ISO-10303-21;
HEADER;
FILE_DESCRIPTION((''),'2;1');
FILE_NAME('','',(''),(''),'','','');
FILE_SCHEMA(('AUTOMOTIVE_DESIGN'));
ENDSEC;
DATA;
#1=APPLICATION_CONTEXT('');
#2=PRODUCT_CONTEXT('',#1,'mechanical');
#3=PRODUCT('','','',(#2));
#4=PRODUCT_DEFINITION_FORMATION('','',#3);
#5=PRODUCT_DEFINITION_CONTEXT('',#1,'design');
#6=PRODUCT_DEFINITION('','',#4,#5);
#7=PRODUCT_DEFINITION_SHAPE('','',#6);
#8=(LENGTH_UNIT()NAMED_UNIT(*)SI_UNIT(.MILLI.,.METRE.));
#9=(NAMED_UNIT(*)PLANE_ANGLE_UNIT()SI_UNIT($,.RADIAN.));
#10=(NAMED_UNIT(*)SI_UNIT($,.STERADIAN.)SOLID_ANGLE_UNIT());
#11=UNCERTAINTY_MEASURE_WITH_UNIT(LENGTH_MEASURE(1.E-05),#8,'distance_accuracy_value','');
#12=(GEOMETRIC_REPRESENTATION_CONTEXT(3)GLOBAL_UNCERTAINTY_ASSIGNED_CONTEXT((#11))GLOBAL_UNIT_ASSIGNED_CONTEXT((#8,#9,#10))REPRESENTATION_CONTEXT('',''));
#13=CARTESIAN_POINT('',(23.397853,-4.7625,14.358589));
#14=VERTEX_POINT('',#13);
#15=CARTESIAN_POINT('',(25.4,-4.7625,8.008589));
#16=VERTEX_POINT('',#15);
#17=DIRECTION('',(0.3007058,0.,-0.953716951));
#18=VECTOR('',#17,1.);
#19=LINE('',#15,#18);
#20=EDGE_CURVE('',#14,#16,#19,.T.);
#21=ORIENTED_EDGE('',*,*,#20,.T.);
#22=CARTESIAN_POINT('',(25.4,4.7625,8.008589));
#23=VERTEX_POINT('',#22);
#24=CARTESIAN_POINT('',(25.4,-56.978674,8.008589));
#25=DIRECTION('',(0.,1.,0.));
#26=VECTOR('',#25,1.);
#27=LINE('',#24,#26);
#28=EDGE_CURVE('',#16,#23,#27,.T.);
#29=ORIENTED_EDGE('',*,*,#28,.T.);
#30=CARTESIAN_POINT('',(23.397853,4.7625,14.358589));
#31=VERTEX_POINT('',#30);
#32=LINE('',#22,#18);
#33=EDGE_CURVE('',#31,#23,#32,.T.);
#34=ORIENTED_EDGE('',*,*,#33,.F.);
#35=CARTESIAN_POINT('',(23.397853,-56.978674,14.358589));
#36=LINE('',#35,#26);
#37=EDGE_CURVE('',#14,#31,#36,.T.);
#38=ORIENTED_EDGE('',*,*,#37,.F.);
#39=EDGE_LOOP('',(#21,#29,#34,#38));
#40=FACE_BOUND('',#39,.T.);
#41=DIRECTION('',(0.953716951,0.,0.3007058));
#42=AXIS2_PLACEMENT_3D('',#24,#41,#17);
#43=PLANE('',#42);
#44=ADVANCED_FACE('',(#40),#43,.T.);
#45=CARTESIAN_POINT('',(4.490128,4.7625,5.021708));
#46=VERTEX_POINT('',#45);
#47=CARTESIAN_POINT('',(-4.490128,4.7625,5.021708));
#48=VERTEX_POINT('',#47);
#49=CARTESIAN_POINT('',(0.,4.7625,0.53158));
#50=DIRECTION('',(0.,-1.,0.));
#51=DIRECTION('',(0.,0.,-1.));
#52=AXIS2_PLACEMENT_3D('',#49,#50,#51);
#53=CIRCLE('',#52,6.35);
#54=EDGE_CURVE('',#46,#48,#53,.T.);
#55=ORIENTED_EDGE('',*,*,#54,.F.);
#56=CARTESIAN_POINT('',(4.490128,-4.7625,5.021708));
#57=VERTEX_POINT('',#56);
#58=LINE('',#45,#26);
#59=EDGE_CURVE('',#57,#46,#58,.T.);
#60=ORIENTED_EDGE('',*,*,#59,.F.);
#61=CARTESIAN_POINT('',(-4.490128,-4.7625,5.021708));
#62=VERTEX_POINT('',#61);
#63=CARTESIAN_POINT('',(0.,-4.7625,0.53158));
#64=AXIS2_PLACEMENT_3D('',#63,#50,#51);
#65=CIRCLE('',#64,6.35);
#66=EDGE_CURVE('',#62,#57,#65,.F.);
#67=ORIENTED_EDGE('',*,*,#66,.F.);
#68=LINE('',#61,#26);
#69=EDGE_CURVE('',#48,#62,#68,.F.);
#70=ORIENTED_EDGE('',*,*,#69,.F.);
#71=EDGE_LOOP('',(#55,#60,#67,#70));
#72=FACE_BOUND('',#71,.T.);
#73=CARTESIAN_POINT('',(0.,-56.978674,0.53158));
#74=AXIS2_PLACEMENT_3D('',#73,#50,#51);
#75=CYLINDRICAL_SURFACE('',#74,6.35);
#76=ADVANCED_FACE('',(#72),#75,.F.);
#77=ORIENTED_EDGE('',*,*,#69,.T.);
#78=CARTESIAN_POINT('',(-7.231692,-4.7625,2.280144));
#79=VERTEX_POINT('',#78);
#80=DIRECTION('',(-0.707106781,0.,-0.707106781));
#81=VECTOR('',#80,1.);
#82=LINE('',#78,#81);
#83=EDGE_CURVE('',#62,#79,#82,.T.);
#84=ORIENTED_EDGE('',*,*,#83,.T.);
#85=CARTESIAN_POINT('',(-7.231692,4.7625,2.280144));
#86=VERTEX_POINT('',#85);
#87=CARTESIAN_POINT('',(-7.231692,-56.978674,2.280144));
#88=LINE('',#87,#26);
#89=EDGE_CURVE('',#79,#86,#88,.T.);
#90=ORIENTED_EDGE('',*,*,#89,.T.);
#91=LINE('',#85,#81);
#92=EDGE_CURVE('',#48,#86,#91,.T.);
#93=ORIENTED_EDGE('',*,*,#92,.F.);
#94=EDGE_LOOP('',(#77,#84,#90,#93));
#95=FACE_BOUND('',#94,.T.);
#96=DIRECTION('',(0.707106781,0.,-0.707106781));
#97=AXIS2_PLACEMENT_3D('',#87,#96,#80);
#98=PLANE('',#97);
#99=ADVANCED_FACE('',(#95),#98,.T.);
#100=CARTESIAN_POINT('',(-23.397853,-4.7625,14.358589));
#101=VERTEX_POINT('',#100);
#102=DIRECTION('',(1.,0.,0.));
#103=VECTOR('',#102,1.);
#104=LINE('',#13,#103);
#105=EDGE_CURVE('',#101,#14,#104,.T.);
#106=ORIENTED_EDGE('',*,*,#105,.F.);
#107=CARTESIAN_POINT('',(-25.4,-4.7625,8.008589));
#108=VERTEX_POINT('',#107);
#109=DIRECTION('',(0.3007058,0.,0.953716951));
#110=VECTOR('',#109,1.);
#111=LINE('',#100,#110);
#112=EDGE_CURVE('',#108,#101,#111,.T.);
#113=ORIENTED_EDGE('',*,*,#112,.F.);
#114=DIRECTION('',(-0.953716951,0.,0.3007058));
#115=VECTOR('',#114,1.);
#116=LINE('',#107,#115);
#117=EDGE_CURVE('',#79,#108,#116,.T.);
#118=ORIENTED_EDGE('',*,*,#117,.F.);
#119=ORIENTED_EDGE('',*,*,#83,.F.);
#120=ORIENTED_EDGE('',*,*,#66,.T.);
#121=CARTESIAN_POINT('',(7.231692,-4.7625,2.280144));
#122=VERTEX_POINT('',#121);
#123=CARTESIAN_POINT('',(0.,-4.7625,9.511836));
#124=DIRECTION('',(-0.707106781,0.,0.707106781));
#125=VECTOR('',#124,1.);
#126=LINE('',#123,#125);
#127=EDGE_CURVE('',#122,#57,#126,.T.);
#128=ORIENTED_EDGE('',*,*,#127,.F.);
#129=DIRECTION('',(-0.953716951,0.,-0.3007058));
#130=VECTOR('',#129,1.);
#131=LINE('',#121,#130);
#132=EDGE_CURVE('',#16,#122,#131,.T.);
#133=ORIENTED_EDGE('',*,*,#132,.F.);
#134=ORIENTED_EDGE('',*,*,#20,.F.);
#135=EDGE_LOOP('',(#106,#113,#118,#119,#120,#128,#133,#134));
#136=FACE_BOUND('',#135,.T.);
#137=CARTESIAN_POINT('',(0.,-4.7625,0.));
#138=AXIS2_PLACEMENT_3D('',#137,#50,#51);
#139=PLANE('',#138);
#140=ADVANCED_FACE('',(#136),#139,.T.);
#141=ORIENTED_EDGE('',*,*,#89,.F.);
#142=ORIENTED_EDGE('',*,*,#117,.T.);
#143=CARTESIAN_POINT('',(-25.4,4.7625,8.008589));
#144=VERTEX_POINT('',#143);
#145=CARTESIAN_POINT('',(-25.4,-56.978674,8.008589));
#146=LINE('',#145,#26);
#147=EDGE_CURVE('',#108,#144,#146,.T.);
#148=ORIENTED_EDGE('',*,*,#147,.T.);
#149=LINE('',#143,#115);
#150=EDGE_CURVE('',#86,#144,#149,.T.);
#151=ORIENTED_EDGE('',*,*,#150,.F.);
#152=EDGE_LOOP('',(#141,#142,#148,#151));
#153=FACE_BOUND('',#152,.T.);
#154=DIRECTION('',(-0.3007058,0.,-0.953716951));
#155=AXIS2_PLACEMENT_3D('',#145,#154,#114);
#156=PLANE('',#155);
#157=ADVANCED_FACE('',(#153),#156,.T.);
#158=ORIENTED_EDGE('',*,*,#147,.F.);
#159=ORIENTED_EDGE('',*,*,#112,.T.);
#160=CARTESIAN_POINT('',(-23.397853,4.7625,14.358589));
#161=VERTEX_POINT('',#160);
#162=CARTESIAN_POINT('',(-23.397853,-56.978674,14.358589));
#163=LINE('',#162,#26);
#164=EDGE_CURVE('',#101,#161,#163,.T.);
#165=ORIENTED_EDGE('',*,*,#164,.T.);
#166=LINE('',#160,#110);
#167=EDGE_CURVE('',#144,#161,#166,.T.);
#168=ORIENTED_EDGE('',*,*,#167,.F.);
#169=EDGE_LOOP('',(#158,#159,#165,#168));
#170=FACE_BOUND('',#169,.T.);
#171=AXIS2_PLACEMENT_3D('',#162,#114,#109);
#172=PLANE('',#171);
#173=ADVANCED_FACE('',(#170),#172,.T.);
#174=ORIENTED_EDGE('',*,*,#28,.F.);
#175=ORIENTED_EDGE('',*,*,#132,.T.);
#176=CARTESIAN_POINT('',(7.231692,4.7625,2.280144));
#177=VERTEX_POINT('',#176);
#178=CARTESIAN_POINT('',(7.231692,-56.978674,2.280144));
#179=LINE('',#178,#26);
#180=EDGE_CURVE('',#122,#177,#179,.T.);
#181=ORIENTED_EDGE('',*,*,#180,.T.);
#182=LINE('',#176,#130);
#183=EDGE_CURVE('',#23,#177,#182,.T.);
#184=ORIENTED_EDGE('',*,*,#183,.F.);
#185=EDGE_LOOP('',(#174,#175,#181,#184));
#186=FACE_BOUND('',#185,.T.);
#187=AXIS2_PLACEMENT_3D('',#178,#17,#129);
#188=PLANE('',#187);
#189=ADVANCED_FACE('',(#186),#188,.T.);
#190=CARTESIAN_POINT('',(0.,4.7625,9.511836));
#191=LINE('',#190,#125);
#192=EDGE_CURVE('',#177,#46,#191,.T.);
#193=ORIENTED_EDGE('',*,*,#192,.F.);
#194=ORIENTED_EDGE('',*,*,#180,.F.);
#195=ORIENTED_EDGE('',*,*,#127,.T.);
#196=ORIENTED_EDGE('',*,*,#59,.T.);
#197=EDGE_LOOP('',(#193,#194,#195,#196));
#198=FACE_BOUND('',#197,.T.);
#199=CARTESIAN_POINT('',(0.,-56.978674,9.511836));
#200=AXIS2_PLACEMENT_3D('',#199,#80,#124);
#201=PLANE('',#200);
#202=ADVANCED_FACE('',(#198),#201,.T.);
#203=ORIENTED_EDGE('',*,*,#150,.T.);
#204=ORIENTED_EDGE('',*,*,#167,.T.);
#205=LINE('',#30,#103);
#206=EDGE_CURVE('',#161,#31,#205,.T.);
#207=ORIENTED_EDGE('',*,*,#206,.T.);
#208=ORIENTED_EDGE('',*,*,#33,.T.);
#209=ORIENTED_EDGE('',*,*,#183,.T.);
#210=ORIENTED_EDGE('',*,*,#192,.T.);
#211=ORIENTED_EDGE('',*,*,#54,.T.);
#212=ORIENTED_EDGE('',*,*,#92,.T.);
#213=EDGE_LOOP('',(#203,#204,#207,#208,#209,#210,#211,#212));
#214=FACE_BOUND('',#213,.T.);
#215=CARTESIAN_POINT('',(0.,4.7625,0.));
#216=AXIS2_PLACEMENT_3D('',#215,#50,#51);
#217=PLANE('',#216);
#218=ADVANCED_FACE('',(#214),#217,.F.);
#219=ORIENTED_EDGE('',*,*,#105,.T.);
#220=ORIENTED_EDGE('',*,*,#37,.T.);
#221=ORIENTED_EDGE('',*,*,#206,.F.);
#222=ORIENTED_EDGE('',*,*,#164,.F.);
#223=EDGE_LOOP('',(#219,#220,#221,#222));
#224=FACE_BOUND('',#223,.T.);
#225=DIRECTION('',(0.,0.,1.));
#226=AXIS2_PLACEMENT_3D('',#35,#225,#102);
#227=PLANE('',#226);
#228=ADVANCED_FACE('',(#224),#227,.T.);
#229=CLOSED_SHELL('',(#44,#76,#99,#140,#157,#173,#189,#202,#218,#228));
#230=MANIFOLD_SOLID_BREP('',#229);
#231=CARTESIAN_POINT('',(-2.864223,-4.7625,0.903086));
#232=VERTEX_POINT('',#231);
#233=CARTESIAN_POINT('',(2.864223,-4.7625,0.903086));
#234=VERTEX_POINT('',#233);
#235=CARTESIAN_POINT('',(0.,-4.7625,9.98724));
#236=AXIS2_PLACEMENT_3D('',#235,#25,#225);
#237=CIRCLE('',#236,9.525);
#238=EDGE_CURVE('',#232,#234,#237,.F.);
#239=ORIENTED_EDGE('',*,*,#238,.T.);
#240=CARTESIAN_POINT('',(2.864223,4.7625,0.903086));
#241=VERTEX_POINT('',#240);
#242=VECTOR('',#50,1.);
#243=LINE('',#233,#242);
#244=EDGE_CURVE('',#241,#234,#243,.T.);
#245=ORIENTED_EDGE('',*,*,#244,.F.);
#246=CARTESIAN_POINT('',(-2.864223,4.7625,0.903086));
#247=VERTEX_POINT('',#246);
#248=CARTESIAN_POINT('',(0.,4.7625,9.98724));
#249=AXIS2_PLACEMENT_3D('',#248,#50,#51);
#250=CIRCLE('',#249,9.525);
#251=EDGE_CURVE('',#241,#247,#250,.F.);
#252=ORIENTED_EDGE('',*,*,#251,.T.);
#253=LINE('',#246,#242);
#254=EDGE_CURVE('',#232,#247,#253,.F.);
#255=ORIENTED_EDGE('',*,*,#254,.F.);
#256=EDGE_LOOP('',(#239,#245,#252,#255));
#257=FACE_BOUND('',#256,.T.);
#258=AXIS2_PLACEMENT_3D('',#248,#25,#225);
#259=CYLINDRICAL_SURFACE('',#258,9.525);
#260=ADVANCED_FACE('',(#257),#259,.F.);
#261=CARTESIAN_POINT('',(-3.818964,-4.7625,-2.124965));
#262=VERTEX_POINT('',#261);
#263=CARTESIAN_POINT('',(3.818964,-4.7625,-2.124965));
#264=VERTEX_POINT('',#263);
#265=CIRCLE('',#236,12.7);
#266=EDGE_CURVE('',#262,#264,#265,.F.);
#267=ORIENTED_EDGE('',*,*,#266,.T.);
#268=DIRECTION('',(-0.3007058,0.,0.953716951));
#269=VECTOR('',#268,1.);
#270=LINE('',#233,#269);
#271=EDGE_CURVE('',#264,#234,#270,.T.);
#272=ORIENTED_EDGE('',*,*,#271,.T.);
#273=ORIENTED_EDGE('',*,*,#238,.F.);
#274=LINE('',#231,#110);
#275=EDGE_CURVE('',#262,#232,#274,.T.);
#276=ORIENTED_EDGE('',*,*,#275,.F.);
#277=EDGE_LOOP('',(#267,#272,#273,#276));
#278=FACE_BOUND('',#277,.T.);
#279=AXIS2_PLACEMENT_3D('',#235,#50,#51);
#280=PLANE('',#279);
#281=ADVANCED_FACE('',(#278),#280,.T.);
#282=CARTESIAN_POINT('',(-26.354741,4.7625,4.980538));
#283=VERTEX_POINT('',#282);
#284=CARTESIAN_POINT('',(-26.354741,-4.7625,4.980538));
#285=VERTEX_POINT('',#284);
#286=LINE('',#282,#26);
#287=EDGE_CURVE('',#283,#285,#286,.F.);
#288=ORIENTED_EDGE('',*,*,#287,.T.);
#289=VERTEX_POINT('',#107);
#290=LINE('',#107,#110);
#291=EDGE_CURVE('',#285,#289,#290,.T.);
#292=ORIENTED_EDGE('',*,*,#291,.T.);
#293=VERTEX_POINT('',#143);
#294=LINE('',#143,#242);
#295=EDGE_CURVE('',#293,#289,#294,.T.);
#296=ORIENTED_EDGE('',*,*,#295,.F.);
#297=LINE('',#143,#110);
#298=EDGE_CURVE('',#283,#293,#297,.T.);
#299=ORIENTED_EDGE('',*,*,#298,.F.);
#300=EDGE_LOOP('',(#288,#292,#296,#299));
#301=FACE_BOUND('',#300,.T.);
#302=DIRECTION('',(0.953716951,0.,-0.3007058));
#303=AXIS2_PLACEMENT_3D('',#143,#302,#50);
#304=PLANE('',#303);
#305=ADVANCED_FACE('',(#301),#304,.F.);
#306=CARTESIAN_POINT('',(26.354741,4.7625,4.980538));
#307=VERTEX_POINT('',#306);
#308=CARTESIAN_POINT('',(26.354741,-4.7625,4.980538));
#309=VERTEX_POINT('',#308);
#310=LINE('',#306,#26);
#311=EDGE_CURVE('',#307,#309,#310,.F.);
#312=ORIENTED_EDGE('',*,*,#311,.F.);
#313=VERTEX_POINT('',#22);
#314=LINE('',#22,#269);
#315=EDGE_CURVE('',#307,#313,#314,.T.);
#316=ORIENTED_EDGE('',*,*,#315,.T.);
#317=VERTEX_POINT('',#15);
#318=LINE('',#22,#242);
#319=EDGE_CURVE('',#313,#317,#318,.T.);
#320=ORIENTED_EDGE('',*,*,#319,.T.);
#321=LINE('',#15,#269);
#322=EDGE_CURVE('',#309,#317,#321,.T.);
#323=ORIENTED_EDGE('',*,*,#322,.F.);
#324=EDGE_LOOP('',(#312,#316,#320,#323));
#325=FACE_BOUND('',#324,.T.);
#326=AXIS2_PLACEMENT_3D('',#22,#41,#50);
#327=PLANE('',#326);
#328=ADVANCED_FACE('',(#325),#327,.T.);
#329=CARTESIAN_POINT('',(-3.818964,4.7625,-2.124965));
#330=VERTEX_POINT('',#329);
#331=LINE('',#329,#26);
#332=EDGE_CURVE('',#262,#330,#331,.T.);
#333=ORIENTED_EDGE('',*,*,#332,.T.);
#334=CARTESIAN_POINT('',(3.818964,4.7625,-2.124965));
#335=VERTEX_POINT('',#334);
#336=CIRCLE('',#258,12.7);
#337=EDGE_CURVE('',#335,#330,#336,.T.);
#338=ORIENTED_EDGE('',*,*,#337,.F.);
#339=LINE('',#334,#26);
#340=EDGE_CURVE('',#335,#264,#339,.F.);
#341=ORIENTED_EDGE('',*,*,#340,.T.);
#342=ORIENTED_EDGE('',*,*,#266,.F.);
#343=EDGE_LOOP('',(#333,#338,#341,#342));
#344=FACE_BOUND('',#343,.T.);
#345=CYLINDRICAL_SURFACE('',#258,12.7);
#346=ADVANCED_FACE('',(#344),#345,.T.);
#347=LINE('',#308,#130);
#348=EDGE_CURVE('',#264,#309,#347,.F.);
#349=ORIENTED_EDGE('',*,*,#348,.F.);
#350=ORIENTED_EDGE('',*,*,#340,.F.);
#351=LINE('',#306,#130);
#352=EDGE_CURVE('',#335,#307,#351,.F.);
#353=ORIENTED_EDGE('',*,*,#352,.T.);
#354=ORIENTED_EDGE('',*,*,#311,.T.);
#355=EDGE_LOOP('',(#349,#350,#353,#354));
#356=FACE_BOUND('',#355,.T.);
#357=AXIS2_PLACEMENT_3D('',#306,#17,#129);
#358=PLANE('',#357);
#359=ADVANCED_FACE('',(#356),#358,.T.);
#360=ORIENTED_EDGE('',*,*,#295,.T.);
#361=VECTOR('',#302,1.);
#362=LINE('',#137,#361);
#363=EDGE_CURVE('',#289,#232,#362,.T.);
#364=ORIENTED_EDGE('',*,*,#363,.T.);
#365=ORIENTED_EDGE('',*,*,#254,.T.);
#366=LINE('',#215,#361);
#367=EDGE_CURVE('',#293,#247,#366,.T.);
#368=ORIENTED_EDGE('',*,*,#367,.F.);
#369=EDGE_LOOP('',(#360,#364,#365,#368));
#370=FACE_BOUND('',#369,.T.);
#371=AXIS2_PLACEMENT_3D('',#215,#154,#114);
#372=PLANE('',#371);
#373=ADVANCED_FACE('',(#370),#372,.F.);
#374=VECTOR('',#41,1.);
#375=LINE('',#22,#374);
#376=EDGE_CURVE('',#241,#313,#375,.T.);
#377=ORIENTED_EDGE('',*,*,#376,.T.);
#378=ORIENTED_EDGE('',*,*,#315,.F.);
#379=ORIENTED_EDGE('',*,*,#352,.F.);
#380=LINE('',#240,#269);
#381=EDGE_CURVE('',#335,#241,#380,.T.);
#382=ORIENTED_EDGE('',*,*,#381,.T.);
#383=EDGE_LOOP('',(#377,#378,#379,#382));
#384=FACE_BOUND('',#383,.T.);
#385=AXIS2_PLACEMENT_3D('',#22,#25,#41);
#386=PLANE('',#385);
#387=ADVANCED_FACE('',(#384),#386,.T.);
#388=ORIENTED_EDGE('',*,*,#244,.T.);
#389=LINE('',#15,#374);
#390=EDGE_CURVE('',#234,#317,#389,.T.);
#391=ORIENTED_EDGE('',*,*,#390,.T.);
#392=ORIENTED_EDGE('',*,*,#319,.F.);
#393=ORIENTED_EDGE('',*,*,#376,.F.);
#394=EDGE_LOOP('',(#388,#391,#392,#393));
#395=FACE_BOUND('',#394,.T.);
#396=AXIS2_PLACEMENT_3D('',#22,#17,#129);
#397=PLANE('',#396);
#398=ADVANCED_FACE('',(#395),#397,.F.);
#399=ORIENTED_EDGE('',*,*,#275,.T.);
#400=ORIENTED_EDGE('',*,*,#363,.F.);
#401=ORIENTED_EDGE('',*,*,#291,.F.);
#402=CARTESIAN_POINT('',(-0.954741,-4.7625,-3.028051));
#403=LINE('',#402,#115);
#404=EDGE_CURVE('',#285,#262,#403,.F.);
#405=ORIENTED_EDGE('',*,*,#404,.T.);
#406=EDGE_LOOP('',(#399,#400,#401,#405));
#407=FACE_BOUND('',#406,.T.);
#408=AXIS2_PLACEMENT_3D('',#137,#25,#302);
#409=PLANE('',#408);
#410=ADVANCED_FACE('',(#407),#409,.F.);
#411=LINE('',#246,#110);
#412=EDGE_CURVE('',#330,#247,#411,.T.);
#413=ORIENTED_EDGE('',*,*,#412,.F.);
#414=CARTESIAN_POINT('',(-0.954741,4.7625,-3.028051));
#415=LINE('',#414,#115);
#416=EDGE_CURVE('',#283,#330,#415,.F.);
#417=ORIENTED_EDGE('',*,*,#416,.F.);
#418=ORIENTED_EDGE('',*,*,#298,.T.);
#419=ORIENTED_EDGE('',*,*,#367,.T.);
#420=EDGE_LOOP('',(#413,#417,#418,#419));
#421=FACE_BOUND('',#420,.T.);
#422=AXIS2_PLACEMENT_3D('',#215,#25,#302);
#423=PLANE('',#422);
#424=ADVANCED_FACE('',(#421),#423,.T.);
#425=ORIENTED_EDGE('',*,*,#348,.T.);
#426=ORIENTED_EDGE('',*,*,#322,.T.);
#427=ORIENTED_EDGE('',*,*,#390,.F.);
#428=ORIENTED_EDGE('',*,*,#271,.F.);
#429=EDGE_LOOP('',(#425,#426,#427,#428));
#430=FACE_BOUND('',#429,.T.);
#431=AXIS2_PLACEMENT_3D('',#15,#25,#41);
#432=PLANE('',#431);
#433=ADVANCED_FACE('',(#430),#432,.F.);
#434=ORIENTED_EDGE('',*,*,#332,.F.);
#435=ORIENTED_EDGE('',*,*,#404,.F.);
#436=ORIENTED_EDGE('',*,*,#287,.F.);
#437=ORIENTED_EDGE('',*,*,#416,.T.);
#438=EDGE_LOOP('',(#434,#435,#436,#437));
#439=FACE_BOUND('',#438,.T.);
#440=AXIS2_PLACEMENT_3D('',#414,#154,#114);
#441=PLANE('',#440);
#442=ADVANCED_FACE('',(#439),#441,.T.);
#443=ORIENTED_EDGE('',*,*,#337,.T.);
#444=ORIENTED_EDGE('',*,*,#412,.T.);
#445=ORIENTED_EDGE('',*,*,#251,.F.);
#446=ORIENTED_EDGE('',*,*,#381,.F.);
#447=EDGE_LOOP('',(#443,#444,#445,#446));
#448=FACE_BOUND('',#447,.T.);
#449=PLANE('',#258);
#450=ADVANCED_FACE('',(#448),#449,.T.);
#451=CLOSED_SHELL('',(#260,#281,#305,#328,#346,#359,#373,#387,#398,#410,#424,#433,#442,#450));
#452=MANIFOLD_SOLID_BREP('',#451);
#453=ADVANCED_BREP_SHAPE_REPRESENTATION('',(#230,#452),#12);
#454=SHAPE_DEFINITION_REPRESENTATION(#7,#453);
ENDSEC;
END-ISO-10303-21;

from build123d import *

# Parameters (mm, degrees)
BOSS_EXTRUDE1_DEPTH    = 4.7625
BOSS_EXTRUDE2_DEPTH    = 9.525
FILLET1_R              = 6.35
CONVERT_SOLID1_START   = -4.7625
CONVERT_SOLID1_DEPTH   = 9.525
CONVERT_SOLID1_2_DEPTH = 9.525


# Read off the part's stored shape, not the designer's step: Convert-Solid1
with BuildPart() as part:
    # Sketch1 → Boss-Extrude1 (new, symmetric)
    with BuildSketch(Plane(origin=(0, 0, 0), x_dir=(1, 0, 0), z_dir=(0, 1, 0))):
        Polygon((0, 3.329079972), (26.354740913, -4.980537919), (25.4, -8.008589238), (0, 0), (-25.4, -8.008589238), (-26.354740913, -4.980537919), align=None)
    extrude(amount=BOSS_EXTRUDE1_DEPTH, both=True)

    # Convert-Solid1 outline → Convert-Solid1 (cut)
    with BuildSketch(Plane(origin=(0, 0, 0), x_dir=(1, 0, 0), z_dir=(0, 1, 0)).offset(CONVERT_SOLID1_START)):
        with BuildLine():
            ThreePointArc((-3.818963654, 2.124965358), (0, 2.712760083), (3.818963654, 2.124965358))
            Line((3.818963654, 2.124965358), (0, 3.329079972))
            Line((0, 3.329079972), (-3.818963654, 2.124965358))
        make_face()
    extrude(amount=CONVERT_SOLID1_DEPTH, mode=Mode.SUBTRACT)

    # Convert-Solid1 2 outline → Convert-Solid1 2 (add)
    with BuildSketch(Plane(origin=(0, 0, 0), x_dir=(1, 0, 0), z_dir=(0, 1, 0)).offset(CONVERT_SOLID1_START)):
        with BuildLine():
            ThreePointArc((-2.86422274, -0.903085961), (0, -0.462239917), (2.86422274, -0.903085961))
            Line((2.86422274, -0.903085961), (0, 0))
            Line((0, 0), (-2.86422274, -0.903085961))
        make_face()
    extrude(amount=CONVERT_SOLID1_2_DEPTH)


with BuildPart() as body_2:
    # Sketch3 → Boss-Extrude2 (new body)
    with BuildSketch(Plane(origin=(0, 4.7625, 0), x_dir=(1, 0, 0), z_dir=(0, 1, 0))):
        Polygon((-25.4, -8.008589238), (-7.231692088, -2.280143757), (0, -9.511835845), (7.231692088, -2.280143757), (25.4, -8.008589238), (23.397852691, -14.358589238), (-23.397852691, -14.358589238), align=None)
    extrude(amount=-BOSS_EXTRUDE2_DEPTH)

    # Fillet1
    fillet1_edges = [body_2.edges().sort_by_distance(p)[0] for p in [
        (0, 0, 9.511835845),
    ]]
    fillet(fillet1_edges, radius=FILLET1_R)


solid = Compound([part.part, body_2.part])
